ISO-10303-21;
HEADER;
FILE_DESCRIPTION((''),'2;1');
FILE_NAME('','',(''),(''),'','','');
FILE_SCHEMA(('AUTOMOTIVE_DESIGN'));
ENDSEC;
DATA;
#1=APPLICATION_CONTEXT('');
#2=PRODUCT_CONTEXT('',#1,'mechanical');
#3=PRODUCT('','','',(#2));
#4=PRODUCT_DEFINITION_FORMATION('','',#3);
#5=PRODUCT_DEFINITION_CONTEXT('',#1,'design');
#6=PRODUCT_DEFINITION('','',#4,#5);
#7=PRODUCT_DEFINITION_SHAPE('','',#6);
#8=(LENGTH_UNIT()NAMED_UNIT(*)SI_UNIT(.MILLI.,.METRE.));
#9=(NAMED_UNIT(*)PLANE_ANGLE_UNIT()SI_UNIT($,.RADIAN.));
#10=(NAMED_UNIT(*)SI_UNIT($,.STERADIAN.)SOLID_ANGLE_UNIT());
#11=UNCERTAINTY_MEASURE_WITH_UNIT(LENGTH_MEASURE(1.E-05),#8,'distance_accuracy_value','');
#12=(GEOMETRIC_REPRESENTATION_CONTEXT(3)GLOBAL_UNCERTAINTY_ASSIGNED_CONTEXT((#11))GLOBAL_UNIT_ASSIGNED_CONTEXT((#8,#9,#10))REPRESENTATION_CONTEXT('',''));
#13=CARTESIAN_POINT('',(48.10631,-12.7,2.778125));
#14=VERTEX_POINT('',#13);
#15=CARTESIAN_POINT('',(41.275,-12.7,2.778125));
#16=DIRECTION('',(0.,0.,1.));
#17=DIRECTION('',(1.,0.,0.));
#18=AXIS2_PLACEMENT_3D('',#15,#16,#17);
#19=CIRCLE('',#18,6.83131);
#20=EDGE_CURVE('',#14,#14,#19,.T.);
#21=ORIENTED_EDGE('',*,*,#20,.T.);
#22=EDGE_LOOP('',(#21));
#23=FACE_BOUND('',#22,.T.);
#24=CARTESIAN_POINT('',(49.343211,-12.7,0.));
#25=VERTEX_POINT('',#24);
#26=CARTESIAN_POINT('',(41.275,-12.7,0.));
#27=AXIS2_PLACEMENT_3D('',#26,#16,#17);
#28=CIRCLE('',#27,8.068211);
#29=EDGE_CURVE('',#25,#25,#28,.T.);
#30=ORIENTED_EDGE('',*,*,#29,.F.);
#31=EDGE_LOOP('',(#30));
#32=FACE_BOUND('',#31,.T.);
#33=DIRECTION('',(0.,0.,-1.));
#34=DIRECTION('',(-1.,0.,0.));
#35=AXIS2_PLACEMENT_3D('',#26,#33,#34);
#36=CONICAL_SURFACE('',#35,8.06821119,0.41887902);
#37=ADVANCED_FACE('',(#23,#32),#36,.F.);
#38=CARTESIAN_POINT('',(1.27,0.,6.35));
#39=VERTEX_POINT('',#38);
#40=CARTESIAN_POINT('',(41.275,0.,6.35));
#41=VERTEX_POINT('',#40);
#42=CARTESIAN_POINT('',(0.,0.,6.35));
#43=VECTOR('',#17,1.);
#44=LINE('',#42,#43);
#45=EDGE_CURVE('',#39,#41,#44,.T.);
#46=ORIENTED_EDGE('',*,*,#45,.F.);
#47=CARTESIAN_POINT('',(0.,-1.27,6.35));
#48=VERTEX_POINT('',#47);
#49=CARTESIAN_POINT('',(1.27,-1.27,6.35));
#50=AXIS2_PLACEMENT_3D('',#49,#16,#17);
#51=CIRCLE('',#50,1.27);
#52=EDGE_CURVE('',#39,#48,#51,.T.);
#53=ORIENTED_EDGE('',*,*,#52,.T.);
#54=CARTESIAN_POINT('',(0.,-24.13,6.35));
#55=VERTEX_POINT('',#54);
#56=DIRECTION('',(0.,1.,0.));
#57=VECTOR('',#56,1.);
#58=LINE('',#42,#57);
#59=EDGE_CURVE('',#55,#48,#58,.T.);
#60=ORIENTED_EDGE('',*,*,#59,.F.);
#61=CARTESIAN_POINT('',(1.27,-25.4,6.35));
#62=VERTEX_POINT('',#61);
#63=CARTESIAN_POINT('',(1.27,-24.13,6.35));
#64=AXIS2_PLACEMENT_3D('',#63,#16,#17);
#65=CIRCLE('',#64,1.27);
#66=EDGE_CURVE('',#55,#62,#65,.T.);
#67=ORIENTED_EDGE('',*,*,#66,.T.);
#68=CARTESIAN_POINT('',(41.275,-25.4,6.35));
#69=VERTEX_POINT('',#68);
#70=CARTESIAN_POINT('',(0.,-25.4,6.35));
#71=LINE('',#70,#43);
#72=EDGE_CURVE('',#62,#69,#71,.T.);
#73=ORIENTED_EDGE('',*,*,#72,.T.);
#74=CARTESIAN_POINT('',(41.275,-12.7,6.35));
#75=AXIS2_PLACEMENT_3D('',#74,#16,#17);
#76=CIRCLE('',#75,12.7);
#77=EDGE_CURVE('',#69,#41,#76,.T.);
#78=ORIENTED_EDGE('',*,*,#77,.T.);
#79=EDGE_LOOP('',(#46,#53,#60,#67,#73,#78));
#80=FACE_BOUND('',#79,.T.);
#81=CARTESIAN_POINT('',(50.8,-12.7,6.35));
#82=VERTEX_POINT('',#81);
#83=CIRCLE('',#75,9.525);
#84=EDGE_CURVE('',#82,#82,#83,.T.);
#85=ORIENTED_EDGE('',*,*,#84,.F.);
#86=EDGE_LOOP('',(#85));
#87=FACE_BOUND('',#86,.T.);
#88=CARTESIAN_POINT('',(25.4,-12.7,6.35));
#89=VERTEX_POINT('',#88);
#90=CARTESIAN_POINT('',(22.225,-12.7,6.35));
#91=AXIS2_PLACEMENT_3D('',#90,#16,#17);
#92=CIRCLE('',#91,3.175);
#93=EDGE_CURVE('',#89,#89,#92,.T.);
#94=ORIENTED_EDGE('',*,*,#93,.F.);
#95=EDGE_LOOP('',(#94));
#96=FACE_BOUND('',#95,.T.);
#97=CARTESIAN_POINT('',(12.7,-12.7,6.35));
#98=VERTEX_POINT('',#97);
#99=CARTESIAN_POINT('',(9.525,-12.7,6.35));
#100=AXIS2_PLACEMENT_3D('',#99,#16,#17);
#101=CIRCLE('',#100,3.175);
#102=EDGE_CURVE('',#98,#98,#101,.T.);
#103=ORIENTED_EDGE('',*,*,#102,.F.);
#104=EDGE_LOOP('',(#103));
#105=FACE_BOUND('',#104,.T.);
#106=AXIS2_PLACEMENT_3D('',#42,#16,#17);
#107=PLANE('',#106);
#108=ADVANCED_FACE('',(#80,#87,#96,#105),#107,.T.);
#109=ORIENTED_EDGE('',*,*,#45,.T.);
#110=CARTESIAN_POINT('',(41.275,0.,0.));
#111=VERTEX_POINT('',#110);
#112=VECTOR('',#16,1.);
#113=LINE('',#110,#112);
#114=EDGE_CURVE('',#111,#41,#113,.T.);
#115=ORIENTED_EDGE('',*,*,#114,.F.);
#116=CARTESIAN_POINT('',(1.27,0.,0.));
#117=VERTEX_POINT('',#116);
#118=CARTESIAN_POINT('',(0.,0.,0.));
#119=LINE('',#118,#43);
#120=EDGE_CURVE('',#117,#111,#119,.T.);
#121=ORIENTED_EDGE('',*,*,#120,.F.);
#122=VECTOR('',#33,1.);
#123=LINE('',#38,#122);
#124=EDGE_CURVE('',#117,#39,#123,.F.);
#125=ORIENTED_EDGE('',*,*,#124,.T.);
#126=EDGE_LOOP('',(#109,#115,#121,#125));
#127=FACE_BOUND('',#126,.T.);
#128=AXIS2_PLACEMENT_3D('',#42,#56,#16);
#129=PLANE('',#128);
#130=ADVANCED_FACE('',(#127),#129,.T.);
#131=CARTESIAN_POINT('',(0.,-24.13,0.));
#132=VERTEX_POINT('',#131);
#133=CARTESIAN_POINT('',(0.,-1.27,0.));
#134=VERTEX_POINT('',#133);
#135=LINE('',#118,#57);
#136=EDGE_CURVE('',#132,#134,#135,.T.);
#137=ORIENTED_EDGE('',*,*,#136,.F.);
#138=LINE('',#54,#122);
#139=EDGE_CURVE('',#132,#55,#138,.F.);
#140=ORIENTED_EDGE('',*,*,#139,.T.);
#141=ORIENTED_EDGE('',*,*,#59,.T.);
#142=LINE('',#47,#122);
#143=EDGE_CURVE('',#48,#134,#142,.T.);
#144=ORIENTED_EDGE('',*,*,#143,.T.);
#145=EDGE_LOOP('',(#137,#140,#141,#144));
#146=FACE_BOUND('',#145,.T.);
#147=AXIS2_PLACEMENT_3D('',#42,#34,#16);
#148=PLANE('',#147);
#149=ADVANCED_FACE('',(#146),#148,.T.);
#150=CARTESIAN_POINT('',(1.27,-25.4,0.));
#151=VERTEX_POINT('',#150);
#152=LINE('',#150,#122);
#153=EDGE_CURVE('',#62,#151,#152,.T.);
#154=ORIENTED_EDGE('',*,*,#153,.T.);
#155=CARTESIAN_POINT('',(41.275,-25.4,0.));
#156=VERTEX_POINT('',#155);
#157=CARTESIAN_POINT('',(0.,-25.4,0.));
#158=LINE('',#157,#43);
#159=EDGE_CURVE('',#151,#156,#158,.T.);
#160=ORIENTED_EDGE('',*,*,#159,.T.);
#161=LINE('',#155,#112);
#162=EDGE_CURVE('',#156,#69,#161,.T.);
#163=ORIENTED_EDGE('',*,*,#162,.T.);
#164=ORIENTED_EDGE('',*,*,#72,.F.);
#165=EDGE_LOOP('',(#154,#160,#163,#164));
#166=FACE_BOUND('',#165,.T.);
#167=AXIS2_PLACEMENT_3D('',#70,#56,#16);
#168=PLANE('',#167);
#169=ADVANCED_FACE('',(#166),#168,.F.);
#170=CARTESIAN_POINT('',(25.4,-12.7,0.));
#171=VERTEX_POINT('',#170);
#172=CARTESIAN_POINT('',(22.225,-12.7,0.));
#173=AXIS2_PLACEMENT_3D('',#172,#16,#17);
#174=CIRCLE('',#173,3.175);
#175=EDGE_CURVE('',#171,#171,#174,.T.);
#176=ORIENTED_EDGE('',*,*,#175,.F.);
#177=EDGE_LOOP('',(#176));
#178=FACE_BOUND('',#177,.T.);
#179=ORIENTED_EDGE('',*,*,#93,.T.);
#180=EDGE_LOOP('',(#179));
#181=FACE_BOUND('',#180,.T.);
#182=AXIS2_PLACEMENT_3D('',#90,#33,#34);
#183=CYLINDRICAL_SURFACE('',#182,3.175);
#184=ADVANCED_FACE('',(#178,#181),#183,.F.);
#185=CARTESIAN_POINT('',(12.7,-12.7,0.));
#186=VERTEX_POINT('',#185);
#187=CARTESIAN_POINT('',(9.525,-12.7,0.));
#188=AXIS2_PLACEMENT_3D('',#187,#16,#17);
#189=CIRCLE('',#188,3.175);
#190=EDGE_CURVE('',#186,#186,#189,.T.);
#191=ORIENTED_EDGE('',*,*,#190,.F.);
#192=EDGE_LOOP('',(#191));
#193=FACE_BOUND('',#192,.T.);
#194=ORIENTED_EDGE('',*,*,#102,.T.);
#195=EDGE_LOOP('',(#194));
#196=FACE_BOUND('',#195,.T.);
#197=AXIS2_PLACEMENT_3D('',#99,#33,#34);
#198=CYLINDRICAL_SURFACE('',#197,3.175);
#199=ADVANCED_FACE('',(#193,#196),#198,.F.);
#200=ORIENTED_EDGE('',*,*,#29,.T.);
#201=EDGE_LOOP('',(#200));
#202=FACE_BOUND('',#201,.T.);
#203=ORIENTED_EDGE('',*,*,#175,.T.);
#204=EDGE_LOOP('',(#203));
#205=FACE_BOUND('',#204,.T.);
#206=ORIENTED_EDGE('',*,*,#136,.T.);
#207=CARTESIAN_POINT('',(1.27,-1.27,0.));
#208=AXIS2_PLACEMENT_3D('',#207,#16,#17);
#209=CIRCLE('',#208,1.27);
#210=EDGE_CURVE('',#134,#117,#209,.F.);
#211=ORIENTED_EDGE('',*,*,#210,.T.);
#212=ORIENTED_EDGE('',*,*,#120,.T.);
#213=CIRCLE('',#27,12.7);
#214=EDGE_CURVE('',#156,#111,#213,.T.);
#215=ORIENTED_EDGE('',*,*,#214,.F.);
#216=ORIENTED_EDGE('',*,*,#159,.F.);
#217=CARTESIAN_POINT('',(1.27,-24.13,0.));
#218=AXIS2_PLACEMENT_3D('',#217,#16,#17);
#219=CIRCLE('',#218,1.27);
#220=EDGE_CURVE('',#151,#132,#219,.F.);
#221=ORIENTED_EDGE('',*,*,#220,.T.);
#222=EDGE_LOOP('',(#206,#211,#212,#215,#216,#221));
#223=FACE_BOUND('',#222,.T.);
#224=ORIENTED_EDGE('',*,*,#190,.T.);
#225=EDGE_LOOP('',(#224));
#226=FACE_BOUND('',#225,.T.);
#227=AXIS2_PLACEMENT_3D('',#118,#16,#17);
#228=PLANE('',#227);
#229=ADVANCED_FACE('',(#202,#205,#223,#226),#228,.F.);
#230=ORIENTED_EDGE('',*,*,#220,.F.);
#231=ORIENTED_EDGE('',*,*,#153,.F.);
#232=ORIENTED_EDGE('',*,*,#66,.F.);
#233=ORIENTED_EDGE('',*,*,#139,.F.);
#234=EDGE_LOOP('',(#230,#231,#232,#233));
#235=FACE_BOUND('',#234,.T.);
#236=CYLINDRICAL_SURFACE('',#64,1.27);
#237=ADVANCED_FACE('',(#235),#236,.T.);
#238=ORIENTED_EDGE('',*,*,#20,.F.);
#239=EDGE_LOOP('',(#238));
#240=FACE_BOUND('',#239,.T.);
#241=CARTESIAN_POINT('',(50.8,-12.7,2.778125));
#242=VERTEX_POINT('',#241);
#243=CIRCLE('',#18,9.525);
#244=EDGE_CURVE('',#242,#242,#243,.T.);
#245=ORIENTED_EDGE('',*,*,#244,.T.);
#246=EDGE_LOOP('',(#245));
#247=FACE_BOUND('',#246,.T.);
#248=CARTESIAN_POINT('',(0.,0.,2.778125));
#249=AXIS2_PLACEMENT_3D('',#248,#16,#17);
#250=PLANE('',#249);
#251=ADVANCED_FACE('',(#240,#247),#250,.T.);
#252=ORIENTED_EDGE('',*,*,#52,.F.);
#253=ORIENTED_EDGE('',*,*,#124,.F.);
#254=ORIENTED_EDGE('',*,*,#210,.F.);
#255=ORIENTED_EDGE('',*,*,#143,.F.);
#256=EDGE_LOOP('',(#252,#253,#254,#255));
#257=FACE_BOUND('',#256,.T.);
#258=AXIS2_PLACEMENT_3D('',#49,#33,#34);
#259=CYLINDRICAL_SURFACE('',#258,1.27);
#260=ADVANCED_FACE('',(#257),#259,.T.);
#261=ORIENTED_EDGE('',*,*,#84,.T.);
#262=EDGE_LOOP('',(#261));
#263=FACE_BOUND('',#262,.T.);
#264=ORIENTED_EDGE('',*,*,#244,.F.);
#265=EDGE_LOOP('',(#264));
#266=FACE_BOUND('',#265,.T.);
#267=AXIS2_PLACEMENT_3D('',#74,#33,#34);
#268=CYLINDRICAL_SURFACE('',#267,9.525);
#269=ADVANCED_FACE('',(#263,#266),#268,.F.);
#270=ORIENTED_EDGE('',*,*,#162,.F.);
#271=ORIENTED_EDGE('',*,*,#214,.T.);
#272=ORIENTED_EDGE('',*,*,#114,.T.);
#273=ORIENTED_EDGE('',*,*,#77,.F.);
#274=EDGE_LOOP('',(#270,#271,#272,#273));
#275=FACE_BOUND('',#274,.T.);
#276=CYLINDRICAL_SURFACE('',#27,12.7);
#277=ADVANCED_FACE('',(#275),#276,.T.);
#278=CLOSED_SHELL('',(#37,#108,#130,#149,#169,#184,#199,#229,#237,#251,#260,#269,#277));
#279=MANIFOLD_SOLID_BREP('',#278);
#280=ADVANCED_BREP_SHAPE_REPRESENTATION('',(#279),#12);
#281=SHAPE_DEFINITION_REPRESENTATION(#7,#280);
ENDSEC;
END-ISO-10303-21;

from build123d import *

# Parameters (mm, degrees)
SKETCH1_W           = 53.975
SKETCH1_H           = 25.4
SKETCH1_R           = 9.525
SKETCH1_R_2         = 3.175
BOSS_EXTRUDE2_DEPTH = 6.35
SKETCH1_5_R         = 9.525
SKETCH1_5_R_2       = 6.35
BOSS_EXTRUDE3_DEPTH = 2.778125
FILLET1_R           = 1.27
CUT_EXTRUDE1_DEPTH  = 60.989858518


with BuildPart() as part:
    # Sketch1 → Boss-Extrude2 (new body)
    with BuildSketch(Plane.XY):
        with Locations((26.9875, -12.7)):
            Rectangle(SKETCH1_W, SKETCH1_H)
        with Locations((41.275, -12.7)):
            Circle(SKETCH1_R, mode=Mode.SUBTRACT)
        with Locations((22.225, -12.7)):
            Circle(SKETCH1_R_2, mode=Mode.SUBTRACT)
        with Locations((9.525, -12.7)):
            Circle(SKETCH1_R_2, mode=Mode.SUBTRACT)
    extrude(amount=BOSS_EXTRUDE2_DEPTH)

    # Sketch1<5> → Boss-Extrude3 (add)
    with BuildSketch(Plane.XY):
        with Locations((41.275, -12.7)):
            Circle(SKETCH1_5_R)
        with Locations((41.275, -12.7)):
            Circle(SKETCH1_5_R_2, mode=Mode.SUBTRACT)
    extrude(amount=BOSS_EXTRUDE3_DEPTH)

    # Fillet1
    fillet1_edges = [part.edges().sort_by_distance(p)[0] for p in [
        (0, -25.4, 3.175),
        (0, 0, 3.175),
        (53.975, -25.4, 3.175),
        (53.975, 0, 3.175),
    ]]
    fillet(fillet1_edges, radius=FILLET1_R)

    # Sketch2 → Cut-Extrude1 (cut, through all)
    with BuildSketch(Plane.XY.offset(6.35)):
        with BuildLine():
            Line((41.275, -25.4), (52.705, -25.4))
            ThreePointArc((52.705, -25.4), (53.603025612, -25.028025612), (53.975, -24.13))
            Line((53.975, -24.13), (53.975, -12.7))
            ThreePointArc((53.975, -12.7), (50.255256121, -21.680256121), (41.275, -25.4))
        make_face()
        with BuildLine():
            ThreePointArc((41.275, 0), (50.255256121, -3.719743879), (53.975, -12.7))
            Line((53.975, -12.7), (53.975, -1.27))
            ThreePointArc((53.975, -1.27), (53.603025612, -0.371974388), (52.705, 0))
            Line((52.705, 0), (41.275, 0))
        make_face()
    extrude(amount=-CUT_EXTRUDE1_DEPTH, mode=Mode.SUBTRACT)

    # Sketch3 → Cut-Revolve3 (revolve, cut)
    with BuildSketch(Plane(origin=(41.275, 0, 0), x_dir=(0, 0, -1), z_dir=(1, 0, 0))):
        Polygon((-2.778125, -11.10969879), (0, -9.872797848), (0, -4.63178881), (-2.778125, -5.868689752), align=None)
    revolve(axis=Axis((41.275, -12.7, 2.778125), (0, 0, -1)), mode=Mode.SUBTRACT)


solid = part.part
